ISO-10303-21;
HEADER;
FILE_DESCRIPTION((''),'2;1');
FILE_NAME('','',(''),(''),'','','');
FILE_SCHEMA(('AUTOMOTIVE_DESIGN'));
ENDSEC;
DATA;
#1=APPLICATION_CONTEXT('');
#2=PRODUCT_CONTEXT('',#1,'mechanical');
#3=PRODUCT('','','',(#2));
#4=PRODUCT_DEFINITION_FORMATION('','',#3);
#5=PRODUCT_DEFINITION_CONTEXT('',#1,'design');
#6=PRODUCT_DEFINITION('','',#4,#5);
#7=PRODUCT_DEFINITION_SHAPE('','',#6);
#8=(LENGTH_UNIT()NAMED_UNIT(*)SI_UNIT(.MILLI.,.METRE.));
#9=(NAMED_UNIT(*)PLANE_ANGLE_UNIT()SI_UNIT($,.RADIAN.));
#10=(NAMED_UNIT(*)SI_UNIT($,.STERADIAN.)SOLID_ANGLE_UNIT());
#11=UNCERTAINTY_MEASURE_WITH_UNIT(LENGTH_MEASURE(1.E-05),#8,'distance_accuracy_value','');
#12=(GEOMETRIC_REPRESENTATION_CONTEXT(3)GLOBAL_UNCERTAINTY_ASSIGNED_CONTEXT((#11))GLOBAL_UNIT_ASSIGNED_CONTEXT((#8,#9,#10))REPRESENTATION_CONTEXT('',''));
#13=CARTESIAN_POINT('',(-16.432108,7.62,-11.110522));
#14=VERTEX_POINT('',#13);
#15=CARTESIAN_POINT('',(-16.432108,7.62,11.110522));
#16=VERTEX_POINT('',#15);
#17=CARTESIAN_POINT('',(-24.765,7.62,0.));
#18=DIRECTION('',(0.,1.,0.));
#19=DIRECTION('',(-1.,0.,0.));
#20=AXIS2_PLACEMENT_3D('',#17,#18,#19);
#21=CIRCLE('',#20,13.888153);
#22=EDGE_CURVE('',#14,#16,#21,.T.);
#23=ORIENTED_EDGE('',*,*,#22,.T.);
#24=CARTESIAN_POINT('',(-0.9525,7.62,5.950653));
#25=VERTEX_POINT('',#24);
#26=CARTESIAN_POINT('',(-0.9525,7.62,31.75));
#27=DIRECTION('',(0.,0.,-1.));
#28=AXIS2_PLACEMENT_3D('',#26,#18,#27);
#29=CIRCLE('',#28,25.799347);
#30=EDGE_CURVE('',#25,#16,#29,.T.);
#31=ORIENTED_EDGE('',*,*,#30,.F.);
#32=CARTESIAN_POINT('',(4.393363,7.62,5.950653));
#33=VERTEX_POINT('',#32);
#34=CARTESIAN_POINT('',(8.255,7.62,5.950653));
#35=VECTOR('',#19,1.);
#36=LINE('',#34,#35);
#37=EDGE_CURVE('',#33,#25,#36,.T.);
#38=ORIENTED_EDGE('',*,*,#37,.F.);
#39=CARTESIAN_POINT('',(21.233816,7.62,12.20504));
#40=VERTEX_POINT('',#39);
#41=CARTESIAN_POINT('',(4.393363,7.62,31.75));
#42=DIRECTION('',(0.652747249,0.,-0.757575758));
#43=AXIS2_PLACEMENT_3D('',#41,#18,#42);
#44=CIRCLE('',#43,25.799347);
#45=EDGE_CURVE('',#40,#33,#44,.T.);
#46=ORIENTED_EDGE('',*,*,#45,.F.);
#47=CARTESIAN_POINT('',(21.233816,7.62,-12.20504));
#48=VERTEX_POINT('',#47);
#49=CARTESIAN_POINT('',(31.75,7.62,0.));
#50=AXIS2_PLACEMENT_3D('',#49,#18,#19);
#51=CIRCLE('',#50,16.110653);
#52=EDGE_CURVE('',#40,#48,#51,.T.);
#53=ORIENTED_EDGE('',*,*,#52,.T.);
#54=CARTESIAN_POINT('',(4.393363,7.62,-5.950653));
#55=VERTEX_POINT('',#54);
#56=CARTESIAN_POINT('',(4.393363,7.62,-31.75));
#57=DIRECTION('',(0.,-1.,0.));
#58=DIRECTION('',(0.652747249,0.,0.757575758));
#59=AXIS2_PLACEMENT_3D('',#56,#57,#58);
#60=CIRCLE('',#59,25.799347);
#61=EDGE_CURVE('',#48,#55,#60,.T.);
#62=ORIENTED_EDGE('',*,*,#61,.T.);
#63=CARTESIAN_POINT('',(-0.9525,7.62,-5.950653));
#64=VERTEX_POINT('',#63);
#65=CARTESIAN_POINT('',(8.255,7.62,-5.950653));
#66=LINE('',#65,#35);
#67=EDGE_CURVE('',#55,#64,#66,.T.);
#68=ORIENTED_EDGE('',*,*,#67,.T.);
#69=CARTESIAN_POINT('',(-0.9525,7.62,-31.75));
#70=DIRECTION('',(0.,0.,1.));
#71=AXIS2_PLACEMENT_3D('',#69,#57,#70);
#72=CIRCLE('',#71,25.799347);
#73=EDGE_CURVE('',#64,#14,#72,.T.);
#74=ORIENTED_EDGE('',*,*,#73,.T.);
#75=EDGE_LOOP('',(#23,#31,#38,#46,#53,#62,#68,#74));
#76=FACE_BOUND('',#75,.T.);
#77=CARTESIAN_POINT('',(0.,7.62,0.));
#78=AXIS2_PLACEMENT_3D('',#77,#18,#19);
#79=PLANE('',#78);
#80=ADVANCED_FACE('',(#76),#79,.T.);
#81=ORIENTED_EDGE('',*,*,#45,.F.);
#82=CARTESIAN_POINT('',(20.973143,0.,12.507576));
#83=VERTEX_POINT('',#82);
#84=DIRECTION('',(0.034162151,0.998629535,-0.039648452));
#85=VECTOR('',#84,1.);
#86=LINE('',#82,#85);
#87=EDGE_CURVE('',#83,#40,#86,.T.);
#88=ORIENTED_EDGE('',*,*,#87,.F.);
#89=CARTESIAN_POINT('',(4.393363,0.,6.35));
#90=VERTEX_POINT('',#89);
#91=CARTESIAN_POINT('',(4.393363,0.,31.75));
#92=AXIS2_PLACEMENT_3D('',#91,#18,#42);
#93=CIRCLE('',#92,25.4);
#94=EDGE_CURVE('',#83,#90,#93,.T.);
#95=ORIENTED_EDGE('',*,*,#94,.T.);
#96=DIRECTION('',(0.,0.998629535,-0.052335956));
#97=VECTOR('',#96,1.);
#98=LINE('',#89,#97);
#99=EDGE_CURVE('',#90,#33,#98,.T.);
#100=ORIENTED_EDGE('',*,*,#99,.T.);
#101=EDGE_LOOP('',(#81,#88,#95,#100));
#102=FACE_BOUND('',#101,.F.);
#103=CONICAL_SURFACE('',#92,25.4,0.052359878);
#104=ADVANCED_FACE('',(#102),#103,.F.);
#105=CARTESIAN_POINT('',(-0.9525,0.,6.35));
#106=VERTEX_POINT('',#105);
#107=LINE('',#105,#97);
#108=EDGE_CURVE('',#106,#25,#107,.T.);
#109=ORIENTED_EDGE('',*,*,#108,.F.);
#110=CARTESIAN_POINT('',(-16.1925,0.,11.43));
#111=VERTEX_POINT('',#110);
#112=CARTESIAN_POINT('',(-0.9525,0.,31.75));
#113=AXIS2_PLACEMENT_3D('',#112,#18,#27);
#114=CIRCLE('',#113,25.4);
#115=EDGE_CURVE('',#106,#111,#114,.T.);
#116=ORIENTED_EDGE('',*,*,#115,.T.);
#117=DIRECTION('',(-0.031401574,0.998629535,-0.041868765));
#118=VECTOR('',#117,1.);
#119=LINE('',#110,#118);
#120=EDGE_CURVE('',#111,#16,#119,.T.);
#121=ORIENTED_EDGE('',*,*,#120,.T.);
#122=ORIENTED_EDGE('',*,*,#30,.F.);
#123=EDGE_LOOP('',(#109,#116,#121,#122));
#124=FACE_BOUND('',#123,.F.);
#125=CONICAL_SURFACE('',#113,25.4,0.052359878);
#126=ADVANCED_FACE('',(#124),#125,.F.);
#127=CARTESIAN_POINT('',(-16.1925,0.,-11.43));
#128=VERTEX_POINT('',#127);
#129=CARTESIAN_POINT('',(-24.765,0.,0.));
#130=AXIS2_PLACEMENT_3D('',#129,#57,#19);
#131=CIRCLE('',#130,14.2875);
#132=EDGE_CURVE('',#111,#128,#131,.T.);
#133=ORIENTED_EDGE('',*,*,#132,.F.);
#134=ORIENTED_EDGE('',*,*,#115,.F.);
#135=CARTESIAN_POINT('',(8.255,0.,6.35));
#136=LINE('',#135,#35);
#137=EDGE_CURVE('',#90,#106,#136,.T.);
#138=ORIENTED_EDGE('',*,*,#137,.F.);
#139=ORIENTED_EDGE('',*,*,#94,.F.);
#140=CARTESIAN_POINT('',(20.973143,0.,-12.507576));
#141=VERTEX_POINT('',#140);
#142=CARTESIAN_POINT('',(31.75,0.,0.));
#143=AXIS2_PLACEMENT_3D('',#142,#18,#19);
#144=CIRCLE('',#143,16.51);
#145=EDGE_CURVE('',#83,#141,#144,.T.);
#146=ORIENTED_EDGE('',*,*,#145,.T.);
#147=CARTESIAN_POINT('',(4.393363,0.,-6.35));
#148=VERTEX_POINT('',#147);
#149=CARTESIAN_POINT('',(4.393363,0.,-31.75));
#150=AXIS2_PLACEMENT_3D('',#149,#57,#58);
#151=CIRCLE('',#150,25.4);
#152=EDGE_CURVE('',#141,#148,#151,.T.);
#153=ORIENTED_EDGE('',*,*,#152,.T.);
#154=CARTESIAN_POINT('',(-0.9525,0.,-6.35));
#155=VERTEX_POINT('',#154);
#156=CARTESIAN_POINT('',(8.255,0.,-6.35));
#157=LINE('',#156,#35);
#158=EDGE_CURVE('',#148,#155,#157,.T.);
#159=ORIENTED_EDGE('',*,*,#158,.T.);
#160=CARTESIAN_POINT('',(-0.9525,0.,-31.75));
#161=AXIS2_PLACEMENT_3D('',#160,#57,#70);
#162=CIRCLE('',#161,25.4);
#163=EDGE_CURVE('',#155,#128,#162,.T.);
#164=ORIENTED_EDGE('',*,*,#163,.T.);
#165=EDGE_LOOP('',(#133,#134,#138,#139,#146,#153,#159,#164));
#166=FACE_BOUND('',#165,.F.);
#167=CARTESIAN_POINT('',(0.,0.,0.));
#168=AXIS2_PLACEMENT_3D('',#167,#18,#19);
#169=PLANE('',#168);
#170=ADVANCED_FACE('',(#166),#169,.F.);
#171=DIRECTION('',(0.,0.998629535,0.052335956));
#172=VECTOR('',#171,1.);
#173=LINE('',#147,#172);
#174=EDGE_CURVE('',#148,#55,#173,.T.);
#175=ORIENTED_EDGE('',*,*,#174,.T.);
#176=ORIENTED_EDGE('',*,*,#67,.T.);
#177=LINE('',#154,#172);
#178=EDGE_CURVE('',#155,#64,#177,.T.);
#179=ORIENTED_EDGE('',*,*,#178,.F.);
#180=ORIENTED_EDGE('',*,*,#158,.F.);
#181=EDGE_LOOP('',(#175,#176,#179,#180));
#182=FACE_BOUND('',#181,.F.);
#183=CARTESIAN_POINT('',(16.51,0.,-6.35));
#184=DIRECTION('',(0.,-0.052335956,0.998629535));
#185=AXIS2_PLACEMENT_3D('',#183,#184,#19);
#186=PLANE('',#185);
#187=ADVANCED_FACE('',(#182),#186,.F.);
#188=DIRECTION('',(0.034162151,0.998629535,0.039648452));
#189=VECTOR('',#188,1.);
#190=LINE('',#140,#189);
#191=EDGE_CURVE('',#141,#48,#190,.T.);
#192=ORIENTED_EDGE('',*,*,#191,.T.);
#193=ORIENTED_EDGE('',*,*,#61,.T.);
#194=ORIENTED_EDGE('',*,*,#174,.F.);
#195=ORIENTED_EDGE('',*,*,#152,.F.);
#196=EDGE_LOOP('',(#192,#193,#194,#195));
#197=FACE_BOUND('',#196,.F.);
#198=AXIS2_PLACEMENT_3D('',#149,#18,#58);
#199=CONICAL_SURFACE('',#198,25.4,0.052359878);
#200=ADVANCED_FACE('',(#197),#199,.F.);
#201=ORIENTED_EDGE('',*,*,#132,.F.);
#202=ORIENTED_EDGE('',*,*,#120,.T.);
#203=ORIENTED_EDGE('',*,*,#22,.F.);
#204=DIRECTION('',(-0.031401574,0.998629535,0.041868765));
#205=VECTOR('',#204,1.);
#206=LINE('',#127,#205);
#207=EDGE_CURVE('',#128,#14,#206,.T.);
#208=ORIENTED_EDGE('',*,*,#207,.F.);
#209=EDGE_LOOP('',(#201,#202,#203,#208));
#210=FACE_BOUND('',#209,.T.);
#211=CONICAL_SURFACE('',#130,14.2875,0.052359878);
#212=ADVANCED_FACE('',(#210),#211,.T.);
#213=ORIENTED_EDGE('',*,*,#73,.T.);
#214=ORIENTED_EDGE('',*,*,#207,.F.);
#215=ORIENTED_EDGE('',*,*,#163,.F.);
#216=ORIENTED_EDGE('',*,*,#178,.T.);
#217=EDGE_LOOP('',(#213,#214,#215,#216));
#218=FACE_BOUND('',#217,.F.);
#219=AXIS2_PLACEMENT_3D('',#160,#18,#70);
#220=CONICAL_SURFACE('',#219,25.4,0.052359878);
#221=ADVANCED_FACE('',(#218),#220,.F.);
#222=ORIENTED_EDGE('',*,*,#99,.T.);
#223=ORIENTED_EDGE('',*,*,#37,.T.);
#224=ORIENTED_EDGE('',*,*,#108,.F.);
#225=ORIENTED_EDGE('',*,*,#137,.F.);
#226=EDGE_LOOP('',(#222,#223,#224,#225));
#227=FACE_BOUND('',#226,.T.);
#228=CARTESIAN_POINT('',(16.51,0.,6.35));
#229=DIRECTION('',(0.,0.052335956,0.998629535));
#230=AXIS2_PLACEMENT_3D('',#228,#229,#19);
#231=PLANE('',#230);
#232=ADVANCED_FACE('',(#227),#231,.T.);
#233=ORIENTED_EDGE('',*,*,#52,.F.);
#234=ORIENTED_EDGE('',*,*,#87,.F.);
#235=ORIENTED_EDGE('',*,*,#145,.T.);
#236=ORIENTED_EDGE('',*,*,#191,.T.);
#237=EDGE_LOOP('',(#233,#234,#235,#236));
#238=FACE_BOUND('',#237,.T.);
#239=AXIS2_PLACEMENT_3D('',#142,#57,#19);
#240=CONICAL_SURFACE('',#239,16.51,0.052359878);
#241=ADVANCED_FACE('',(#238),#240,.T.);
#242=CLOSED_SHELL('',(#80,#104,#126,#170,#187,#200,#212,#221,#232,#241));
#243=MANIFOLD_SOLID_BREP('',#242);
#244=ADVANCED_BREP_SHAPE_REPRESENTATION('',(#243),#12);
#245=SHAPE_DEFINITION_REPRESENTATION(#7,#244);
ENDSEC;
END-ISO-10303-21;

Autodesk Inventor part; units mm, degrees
ref_plane "YZ Plane" through (0, 0, 0) normal (1, 0, 0) x (0, 1, 0)
ref_plane "XZ Plane" through (0, 0, 0) normal (0, 1, 0) x (-1, 0, 0)
ref_plane "XY Plane" through (0, 0, 0) normal (0, 0, 1) x (1, 0, 0)
sketch "Sketch1" plane through (0, 0, 0) normal (0, 1, 0) x (-1, 0, 0)
  circle A0 centre (-31.75, 0) radius 11.0744
  circle A1 centre (24.765, 0) radius 9.652
  line L0 (-16.51, -6.35) -> (11.9662, -6.35)
  circle A2 centre (24.765, 0) radius 14.2875
  circle A3 centre (-31.75, 0) radius 16.51
  line L1 (-16.51, 6.35) -> (11.9662, 6.35)
  point P0 (0, 0)
  dimension "d15" = 22.1488
  dimension "d17" = 12.7
  dimension "d18" = 33.02
  dimension "d19" = 19.304
  dimension "d20" = 28.575
  dimension "d21" = 56.515
extrude "Extrusion2" add sketch "Sketch1" along normal blind 7.62 contours A0 | A1 | A3 L1 A2 L0 | A3 | A2
fillet "Fillet3" radius 25.4 4 edges at (-11.9662, 3.81, 6.35) (-11.9662, 3.81, -6.35) (16.51, 3.81, -6.35) (16.51, 3.81, 6.35)
draft "FaceDraft2" angle 3 pull direction (0, 1, 0) faces at (41.7415, 5.08, -13.1435) (14.1702, 2.54, 8.307) (8.391, 2.54, -6.6666) (0.8295, 2.54, 6.35) (2.6114, 2.54, -6.35) (-2.7671, 2.54, 6.4149) (-4.5723, 2.54, -6.6093) (-18.1739, 5.08, 12.6764) fixed edges at (48.26, 0, 0) (13.2365, 0, 7.9391) (13.2365, 0, -7.9391) (1.7204, 0, 6.35) (1.7204, 0, -6.35) (-8.9847, 0, 7.6534) (-8.9847, 0, -7.6534) (-39.0525, 0, 0)
properties part number "Connecting Rod Cast Image"
